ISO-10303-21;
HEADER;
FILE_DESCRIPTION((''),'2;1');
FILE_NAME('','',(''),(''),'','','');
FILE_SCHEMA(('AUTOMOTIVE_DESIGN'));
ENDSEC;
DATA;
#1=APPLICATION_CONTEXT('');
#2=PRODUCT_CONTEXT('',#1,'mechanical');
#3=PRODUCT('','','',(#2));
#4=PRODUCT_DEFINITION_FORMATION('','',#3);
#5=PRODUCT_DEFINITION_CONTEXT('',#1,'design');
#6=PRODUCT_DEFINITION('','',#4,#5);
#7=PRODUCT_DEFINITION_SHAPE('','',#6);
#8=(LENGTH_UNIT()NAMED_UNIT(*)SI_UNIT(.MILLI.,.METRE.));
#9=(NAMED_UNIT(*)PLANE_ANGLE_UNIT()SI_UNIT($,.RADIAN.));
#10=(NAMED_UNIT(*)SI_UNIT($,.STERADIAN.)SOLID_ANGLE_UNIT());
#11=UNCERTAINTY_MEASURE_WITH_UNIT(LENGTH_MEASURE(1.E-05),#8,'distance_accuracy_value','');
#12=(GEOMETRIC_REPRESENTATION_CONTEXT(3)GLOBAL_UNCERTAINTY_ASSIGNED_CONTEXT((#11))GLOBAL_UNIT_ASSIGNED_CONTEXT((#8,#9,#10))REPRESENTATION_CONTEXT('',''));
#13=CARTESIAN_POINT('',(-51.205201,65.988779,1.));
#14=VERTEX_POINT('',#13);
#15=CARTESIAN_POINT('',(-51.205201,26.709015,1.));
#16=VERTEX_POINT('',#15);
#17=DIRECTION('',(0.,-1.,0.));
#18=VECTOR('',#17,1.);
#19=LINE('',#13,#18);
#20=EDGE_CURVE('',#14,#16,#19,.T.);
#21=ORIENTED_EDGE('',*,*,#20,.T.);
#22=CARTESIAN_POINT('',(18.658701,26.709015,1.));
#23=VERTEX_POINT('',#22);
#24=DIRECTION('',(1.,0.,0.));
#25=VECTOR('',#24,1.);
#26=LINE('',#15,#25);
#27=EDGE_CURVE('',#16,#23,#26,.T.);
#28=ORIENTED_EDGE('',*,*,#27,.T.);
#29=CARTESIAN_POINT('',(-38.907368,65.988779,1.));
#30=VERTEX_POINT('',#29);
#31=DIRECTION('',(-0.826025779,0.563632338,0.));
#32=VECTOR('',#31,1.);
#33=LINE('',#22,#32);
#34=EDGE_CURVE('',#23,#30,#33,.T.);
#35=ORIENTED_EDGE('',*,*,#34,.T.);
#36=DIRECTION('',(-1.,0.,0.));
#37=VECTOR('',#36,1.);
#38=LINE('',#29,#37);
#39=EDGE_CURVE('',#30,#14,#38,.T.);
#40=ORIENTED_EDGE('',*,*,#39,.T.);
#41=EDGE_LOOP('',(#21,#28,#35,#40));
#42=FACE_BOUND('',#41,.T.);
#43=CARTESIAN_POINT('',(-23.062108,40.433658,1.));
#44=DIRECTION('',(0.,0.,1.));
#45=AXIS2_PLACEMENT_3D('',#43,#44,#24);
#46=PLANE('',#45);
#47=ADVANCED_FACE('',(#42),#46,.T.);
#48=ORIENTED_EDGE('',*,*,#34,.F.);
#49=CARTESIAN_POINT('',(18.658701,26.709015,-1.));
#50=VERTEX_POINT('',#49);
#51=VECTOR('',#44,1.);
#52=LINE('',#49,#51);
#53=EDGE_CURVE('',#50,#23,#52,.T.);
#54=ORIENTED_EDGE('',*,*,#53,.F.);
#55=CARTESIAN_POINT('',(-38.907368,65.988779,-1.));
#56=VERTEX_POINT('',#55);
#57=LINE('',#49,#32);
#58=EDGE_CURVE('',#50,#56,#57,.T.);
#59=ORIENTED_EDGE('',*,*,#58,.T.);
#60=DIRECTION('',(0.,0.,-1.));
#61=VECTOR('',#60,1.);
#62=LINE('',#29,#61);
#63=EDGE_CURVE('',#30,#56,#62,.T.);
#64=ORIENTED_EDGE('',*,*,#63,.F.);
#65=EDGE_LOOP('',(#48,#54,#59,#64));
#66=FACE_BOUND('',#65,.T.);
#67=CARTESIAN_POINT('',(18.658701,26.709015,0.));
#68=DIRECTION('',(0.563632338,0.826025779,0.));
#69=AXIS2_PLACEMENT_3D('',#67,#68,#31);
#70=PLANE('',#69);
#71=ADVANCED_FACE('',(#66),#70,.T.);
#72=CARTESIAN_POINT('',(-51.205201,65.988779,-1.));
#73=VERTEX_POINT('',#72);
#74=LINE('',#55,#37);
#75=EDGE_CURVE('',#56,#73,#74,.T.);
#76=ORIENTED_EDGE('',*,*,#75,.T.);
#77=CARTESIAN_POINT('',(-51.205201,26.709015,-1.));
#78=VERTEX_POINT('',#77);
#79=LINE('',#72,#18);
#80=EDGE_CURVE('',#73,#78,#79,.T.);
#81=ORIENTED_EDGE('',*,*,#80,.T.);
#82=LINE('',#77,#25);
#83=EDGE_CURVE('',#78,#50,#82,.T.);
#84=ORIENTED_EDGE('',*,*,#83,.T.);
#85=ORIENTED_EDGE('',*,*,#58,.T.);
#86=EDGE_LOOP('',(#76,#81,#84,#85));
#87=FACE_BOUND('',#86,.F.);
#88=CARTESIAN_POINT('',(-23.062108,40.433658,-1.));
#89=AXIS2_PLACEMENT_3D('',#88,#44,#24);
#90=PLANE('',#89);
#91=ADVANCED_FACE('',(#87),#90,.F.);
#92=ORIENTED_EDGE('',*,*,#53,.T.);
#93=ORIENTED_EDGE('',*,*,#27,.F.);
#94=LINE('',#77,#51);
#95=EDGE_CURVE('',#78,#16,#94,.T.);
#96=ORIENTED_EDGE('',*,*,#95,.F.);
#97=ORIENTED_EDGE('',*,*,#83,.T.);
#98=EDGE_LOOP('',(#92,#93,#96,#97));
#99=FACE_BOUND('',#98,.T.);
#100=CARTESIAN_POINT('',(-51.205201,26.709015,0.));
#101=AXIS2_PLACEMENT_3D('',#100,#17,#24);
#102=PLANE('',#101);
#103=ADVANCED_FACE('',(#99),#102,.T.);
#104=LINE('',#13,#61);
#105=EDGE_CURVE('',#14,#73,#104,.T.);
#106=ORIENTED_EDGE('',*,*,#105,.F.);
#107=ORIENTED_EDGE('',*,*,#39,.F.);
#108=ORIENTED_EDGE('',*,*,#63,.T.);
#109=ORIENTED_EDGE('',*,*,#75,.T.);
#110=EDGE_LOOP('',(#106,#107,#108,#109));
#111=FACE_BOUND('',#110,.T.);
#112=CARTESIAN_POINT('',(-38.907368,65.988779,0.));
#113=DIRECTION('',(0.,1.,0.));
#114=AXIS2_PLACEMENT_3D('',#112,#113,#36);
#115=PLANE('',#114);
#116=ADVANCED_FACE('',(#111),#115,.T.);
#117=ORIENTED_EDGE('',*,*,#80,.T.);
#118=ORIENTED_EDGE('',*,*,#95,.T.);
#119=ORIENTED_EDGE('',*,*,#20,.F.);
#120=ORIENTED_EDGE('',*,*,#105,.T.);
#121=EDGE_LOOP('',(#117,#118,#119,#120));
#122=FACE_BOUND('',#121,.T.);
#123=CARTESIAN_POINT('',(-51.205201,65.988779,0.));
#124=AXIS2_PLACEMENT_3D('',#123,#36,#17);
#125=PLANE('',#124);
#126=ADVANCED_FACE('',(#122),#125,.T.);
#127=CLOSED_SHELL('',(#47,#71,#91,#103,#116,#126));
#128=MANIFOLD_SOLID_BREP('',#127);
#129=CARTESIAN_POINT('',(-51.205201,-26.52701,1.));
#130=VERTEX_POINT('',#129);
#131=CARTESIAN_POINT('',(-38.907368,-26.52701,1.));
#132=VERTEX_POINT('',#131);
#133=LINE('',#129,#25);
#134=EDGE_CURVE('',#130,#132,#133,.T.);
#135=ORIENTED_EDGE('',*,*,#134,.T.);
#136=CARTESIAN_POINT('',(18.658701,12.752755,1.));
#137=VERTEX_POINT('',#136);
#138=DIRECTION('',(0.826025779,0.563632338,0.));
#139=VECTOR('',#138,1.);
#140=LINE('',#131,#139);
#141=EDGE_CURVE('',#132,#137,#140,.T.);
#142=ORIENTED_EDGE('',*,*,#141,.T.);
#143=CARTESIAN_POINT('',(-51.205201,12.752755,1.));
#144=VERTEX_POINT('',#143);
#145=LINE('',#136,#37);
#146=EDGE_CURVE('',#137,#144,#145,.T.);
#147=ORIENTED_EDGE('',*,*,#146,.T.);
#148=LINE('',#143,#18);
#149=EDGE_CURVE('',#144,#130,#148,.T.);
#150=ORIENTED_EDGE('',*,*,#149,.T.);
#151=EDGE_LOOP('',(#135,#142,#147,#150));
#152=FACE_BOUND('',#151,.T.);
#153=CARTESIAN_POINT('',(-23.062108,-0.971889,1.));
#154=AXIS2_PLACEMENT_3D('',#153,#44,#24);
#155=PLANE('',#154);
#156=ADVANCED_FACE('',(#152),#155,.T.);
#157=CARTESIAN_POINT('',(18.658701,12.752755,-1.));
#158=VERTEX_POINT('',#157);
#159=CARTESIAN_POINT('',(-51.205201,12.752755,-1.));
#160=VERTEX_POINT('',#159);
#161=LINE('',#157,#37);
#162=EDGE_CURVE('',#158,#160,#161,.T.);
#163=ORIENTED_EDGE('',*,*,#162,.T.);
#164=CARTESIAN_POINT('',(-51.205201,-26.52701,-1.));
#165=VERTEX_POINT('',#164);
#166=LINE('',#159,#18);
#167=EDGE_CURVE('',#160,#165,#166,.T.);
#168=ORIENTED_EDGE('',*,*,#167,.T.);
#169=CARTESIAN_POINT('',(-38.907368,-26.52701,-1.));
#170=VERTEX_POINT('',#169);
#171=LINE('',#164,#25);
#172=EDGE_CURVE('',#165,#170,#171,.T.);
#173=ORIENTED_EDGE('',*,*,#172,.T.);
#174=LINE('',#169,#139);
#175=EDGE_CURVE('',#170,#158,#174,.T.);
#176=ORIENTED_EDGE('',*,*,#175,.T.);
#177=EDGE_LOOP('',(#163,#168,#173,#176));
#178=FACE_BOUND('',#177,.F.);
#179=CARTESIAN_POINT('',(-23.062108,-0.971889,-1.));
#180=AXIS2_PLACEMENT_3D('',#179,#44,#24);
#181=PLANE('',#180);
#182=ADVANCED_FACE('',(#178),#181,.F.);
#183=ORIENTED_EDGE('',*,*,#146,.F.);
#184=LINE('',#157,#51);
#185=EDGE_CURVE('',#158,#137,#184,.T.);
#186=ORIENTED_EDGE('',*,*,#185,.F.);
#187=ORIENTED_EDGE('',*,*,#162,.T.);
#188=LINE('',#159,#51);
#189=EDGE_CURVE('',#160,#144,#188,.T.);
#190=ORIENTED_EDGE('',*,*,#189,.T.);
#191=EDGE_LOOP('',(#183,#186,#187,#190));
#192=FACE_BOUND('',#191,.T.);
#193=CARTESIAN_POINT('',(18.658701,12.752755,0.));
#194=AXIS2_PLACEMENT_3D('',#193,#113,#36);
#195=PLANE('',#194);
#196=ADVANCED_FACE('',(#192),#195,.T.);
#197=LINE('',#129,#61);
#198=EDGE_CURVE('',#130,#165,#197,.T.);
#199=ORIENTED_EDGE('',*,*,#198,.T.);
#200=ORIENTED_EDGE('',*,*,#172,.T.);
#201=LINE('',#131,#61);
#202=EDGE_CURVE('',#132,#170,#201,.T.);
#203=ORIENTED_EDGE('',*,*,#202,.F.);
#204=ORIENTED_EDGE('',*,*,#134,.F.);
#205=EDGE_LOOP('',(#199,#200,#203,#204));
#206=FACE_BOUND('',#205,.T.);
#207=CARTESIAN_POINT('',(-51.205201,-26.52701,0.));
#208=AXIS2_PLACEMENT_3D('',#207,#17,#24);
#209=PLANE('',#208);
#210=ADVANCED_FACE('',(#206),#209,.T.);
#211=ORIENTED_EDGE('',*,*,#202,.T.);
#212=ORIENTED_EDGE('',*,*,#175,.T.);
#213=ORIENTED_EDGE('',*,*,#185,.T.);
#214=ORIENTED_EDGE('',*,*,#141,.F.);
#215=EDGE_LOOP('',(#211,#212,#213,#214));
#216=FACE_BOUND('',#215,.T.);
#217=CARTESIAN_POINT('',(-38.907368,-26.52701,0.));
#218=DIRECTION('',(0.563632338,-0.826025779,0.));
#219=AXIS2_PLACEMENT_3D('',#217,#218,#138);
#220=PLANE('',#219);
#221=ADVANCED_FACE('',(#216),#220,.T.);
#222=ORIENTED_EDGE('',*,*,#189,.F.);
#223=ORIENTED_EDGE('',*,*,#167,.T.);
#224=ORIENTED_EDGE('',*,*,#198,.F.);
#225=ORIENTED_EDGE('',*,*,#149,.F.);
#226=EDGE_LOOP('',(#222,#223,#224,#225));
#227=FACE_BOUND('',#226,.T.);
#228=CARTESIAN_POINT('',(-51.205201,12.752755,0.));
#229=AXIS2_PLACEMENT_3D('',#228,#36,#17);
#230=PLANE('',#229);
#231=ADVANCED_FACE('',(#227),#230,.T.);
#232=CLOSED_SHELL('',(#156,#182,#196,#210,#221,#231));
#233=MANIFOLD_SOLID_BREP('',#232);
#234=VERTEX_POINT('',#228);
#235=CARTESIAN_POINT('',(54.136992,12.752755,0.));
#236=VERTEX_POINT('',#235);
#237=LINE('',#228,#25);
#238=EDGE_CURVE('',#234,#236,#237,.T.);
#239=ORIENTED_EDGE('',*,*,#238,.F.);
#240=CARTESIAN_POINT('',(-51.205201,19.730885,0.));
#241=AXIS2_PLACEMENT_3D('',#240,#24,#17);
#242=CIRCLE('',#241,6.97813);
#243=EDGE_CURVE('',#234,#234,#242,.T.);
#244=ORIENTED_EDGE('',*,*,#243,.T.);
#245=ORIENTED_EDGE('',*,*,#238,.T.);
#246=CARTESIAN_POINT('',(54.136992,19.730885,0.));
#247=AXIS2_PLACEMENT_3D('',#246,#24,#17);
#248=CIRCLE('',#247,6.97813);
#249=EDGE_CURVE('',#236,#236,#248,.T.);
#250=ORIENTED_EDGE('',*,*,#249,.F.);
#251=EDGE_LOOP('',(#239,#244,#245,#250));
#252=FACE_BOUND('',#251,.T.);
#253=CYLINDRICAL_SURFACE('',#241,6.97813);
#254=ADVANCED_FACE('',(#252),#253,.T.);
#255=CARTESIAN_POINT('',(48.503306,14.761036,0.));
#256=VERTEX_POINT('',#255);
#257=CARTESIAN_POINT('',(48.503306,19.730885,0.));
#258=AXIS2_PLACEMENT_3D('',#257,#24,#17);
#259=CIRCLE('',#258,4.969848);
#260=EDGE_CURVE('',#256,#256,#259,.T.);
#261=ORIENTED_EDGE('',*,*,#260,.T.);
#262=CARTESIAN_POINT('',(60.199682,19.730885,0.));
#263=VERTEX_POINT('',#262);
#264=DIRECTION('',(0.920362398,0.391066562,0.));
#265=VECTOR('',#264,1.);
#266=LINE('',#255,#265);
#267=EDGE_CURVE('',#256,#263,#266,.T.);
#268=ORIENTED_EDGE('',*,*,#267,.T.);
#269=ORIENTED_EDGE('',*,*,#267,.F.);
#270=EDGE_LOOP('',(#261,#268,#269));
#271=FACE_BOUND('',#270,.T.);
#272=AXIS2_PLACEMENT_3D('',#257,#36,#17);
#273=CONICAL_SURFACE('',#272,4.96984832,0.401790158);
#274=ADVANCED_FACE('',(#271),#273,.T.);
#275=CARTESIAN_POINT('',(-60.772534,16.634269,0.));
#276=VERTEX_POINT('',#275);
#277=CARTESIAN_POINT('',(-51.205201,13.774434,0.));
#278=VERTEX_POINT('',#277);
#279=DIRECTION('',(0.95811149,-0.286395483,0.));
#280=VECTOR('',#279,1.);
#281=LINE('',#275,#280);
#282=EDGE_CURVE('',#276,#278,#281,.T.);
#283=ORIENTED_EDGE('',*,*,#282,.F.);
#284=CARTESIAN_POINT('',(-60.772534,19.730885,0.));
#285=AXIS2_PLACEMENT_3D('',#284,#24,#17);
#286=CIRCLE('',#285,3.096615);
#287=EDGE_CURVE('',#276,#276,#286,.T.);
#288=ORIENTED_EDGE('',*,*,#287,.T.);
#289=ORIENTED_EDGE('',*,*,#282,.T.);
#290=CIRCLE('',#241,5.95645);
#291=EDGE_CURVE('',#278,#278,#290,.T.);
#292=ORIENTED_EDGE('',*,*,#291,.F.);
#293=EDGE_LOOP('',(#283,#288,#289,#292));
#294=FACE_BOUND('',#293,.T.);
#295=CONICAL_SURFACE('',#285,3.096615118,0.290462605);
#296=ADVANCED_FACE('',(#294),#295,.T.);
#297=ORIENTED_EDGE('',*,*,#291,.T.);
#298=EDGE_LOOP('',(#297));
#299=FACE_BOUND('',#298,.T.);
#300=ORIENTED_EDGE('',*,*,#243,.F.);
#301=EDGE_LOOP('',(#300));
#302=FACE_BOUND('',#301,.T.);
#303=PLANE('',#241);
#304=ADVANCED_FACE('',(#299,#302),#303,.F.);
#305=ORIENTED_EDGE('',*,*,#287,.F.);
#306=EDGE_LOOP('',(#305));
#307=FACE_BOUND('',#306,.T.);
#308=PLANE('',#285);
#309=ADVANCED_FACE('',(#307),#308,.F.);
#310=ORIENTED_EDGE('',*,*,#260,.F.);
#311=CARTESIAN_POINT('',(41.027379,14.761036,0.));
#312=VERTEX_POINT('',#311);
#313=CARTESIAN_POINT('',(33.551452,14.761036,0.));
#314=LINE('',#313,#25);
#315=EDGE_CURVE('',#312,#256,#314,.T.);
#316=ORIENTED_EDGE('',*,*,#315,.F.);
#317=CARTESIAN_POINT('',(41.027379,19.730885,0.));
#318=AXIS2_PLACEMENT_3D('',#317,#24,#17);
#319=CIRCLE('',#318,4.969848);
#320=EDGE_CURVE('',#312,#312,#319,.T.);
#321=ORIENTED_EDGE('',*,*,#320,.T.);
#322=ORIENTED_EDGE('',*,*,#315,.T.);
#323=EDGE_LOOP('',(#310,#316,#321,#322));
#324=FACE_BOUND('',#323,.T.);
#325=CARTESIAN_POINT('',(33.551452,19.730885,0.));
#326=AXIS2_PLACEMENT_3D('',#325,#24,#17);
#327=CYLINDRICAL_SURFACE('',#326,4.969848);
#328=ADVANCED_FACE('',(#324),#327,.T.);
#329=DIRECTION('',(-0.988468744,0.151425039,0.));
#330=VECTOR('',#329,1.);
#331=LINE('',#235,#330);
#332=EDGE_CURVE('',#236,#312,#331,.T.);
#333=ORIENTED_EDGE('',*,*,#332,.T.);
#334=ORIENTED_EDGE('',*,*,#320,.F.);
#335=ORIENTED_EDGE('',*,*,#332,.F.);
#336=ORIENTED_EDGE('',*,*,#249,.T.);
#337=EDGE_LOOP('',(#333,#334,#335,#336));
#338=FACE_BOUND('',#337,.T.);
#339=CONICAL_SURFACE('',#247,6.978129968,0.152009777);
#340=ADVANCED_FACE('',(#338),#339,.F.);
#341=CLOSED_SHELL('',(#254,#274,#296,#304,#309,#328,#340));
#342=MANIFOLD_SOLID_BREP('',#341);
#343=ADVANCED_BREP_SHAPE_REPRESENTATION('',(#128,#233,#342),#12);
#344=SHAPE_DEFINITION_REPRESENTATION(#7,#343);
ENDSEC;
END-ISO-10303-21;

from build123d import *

# Parameters (mm, degrees)
F3_DEPTH      = 1
F3_DEPTH_BACK = 1


with BuildPart() as f1:
    # F0 (on Top) → F1 (revolve)
    with BuildSketch(Plane.XY):
        Polygon((60.1996816695, 19.7308845818), (-60.7725344598, 19.7308845818), (-60.7725344598, 16.6342694638), (-51.2052008978, 13.7744341046), (-51.2052008978, 12.7527546138), (24.6576368012, 12.7527546138), (33.5514515318, 14.7610362619), (41.0273786474, 14.7610362619), (48.503305763, 14.7610362619), align=None)
        Polygon((54.1369915009, 12.7527546138), (41.0273786474, 14.7610362619), (33.5514515318, 14.7610362619), (24.6576368012, 12.7527546138), align=None)
    revolve(axis=Axis((-0.2864263952, 19.7308845818, 0), (1, 0, 0)))


with BuildPart() as f3:
    # F2 (on Top) → F3 (new body, two sides)
    with BuildSketch(Plane.XY) as f3_sk:
        Polygon((-51.2052008978, 65.988779068), (-51.2052008978, 26.7090145499), (18.6587013304, 26.7090145499), (-38.9073677361, 65.988779068), align=None)
    extrude(amount=F3_DEPTH)
    extrude(f3_sk.sketch, amount=-F3_DEPTH_BACK)


with BuildPart() as f3b:
    # F2 (on Top) → F3, piece 2 (new body, two sides)
    with BuildSketch(Plane.XY) as f3_2_sk:
        Polygon((-38.9073677361, -26.5270099044), (18.6587013304, 12.7527546138), (-51.2052008978, 12.7527546138), (-51.2052008978, -26.5270099044), align=None)
    extrude(amount=F3_DEPTH)
    extrude(f3_2_sk.sketch, amount=-F3_DEPTH_BACK)


solid = Compound([f1.part, f3.part, f3b.part])
